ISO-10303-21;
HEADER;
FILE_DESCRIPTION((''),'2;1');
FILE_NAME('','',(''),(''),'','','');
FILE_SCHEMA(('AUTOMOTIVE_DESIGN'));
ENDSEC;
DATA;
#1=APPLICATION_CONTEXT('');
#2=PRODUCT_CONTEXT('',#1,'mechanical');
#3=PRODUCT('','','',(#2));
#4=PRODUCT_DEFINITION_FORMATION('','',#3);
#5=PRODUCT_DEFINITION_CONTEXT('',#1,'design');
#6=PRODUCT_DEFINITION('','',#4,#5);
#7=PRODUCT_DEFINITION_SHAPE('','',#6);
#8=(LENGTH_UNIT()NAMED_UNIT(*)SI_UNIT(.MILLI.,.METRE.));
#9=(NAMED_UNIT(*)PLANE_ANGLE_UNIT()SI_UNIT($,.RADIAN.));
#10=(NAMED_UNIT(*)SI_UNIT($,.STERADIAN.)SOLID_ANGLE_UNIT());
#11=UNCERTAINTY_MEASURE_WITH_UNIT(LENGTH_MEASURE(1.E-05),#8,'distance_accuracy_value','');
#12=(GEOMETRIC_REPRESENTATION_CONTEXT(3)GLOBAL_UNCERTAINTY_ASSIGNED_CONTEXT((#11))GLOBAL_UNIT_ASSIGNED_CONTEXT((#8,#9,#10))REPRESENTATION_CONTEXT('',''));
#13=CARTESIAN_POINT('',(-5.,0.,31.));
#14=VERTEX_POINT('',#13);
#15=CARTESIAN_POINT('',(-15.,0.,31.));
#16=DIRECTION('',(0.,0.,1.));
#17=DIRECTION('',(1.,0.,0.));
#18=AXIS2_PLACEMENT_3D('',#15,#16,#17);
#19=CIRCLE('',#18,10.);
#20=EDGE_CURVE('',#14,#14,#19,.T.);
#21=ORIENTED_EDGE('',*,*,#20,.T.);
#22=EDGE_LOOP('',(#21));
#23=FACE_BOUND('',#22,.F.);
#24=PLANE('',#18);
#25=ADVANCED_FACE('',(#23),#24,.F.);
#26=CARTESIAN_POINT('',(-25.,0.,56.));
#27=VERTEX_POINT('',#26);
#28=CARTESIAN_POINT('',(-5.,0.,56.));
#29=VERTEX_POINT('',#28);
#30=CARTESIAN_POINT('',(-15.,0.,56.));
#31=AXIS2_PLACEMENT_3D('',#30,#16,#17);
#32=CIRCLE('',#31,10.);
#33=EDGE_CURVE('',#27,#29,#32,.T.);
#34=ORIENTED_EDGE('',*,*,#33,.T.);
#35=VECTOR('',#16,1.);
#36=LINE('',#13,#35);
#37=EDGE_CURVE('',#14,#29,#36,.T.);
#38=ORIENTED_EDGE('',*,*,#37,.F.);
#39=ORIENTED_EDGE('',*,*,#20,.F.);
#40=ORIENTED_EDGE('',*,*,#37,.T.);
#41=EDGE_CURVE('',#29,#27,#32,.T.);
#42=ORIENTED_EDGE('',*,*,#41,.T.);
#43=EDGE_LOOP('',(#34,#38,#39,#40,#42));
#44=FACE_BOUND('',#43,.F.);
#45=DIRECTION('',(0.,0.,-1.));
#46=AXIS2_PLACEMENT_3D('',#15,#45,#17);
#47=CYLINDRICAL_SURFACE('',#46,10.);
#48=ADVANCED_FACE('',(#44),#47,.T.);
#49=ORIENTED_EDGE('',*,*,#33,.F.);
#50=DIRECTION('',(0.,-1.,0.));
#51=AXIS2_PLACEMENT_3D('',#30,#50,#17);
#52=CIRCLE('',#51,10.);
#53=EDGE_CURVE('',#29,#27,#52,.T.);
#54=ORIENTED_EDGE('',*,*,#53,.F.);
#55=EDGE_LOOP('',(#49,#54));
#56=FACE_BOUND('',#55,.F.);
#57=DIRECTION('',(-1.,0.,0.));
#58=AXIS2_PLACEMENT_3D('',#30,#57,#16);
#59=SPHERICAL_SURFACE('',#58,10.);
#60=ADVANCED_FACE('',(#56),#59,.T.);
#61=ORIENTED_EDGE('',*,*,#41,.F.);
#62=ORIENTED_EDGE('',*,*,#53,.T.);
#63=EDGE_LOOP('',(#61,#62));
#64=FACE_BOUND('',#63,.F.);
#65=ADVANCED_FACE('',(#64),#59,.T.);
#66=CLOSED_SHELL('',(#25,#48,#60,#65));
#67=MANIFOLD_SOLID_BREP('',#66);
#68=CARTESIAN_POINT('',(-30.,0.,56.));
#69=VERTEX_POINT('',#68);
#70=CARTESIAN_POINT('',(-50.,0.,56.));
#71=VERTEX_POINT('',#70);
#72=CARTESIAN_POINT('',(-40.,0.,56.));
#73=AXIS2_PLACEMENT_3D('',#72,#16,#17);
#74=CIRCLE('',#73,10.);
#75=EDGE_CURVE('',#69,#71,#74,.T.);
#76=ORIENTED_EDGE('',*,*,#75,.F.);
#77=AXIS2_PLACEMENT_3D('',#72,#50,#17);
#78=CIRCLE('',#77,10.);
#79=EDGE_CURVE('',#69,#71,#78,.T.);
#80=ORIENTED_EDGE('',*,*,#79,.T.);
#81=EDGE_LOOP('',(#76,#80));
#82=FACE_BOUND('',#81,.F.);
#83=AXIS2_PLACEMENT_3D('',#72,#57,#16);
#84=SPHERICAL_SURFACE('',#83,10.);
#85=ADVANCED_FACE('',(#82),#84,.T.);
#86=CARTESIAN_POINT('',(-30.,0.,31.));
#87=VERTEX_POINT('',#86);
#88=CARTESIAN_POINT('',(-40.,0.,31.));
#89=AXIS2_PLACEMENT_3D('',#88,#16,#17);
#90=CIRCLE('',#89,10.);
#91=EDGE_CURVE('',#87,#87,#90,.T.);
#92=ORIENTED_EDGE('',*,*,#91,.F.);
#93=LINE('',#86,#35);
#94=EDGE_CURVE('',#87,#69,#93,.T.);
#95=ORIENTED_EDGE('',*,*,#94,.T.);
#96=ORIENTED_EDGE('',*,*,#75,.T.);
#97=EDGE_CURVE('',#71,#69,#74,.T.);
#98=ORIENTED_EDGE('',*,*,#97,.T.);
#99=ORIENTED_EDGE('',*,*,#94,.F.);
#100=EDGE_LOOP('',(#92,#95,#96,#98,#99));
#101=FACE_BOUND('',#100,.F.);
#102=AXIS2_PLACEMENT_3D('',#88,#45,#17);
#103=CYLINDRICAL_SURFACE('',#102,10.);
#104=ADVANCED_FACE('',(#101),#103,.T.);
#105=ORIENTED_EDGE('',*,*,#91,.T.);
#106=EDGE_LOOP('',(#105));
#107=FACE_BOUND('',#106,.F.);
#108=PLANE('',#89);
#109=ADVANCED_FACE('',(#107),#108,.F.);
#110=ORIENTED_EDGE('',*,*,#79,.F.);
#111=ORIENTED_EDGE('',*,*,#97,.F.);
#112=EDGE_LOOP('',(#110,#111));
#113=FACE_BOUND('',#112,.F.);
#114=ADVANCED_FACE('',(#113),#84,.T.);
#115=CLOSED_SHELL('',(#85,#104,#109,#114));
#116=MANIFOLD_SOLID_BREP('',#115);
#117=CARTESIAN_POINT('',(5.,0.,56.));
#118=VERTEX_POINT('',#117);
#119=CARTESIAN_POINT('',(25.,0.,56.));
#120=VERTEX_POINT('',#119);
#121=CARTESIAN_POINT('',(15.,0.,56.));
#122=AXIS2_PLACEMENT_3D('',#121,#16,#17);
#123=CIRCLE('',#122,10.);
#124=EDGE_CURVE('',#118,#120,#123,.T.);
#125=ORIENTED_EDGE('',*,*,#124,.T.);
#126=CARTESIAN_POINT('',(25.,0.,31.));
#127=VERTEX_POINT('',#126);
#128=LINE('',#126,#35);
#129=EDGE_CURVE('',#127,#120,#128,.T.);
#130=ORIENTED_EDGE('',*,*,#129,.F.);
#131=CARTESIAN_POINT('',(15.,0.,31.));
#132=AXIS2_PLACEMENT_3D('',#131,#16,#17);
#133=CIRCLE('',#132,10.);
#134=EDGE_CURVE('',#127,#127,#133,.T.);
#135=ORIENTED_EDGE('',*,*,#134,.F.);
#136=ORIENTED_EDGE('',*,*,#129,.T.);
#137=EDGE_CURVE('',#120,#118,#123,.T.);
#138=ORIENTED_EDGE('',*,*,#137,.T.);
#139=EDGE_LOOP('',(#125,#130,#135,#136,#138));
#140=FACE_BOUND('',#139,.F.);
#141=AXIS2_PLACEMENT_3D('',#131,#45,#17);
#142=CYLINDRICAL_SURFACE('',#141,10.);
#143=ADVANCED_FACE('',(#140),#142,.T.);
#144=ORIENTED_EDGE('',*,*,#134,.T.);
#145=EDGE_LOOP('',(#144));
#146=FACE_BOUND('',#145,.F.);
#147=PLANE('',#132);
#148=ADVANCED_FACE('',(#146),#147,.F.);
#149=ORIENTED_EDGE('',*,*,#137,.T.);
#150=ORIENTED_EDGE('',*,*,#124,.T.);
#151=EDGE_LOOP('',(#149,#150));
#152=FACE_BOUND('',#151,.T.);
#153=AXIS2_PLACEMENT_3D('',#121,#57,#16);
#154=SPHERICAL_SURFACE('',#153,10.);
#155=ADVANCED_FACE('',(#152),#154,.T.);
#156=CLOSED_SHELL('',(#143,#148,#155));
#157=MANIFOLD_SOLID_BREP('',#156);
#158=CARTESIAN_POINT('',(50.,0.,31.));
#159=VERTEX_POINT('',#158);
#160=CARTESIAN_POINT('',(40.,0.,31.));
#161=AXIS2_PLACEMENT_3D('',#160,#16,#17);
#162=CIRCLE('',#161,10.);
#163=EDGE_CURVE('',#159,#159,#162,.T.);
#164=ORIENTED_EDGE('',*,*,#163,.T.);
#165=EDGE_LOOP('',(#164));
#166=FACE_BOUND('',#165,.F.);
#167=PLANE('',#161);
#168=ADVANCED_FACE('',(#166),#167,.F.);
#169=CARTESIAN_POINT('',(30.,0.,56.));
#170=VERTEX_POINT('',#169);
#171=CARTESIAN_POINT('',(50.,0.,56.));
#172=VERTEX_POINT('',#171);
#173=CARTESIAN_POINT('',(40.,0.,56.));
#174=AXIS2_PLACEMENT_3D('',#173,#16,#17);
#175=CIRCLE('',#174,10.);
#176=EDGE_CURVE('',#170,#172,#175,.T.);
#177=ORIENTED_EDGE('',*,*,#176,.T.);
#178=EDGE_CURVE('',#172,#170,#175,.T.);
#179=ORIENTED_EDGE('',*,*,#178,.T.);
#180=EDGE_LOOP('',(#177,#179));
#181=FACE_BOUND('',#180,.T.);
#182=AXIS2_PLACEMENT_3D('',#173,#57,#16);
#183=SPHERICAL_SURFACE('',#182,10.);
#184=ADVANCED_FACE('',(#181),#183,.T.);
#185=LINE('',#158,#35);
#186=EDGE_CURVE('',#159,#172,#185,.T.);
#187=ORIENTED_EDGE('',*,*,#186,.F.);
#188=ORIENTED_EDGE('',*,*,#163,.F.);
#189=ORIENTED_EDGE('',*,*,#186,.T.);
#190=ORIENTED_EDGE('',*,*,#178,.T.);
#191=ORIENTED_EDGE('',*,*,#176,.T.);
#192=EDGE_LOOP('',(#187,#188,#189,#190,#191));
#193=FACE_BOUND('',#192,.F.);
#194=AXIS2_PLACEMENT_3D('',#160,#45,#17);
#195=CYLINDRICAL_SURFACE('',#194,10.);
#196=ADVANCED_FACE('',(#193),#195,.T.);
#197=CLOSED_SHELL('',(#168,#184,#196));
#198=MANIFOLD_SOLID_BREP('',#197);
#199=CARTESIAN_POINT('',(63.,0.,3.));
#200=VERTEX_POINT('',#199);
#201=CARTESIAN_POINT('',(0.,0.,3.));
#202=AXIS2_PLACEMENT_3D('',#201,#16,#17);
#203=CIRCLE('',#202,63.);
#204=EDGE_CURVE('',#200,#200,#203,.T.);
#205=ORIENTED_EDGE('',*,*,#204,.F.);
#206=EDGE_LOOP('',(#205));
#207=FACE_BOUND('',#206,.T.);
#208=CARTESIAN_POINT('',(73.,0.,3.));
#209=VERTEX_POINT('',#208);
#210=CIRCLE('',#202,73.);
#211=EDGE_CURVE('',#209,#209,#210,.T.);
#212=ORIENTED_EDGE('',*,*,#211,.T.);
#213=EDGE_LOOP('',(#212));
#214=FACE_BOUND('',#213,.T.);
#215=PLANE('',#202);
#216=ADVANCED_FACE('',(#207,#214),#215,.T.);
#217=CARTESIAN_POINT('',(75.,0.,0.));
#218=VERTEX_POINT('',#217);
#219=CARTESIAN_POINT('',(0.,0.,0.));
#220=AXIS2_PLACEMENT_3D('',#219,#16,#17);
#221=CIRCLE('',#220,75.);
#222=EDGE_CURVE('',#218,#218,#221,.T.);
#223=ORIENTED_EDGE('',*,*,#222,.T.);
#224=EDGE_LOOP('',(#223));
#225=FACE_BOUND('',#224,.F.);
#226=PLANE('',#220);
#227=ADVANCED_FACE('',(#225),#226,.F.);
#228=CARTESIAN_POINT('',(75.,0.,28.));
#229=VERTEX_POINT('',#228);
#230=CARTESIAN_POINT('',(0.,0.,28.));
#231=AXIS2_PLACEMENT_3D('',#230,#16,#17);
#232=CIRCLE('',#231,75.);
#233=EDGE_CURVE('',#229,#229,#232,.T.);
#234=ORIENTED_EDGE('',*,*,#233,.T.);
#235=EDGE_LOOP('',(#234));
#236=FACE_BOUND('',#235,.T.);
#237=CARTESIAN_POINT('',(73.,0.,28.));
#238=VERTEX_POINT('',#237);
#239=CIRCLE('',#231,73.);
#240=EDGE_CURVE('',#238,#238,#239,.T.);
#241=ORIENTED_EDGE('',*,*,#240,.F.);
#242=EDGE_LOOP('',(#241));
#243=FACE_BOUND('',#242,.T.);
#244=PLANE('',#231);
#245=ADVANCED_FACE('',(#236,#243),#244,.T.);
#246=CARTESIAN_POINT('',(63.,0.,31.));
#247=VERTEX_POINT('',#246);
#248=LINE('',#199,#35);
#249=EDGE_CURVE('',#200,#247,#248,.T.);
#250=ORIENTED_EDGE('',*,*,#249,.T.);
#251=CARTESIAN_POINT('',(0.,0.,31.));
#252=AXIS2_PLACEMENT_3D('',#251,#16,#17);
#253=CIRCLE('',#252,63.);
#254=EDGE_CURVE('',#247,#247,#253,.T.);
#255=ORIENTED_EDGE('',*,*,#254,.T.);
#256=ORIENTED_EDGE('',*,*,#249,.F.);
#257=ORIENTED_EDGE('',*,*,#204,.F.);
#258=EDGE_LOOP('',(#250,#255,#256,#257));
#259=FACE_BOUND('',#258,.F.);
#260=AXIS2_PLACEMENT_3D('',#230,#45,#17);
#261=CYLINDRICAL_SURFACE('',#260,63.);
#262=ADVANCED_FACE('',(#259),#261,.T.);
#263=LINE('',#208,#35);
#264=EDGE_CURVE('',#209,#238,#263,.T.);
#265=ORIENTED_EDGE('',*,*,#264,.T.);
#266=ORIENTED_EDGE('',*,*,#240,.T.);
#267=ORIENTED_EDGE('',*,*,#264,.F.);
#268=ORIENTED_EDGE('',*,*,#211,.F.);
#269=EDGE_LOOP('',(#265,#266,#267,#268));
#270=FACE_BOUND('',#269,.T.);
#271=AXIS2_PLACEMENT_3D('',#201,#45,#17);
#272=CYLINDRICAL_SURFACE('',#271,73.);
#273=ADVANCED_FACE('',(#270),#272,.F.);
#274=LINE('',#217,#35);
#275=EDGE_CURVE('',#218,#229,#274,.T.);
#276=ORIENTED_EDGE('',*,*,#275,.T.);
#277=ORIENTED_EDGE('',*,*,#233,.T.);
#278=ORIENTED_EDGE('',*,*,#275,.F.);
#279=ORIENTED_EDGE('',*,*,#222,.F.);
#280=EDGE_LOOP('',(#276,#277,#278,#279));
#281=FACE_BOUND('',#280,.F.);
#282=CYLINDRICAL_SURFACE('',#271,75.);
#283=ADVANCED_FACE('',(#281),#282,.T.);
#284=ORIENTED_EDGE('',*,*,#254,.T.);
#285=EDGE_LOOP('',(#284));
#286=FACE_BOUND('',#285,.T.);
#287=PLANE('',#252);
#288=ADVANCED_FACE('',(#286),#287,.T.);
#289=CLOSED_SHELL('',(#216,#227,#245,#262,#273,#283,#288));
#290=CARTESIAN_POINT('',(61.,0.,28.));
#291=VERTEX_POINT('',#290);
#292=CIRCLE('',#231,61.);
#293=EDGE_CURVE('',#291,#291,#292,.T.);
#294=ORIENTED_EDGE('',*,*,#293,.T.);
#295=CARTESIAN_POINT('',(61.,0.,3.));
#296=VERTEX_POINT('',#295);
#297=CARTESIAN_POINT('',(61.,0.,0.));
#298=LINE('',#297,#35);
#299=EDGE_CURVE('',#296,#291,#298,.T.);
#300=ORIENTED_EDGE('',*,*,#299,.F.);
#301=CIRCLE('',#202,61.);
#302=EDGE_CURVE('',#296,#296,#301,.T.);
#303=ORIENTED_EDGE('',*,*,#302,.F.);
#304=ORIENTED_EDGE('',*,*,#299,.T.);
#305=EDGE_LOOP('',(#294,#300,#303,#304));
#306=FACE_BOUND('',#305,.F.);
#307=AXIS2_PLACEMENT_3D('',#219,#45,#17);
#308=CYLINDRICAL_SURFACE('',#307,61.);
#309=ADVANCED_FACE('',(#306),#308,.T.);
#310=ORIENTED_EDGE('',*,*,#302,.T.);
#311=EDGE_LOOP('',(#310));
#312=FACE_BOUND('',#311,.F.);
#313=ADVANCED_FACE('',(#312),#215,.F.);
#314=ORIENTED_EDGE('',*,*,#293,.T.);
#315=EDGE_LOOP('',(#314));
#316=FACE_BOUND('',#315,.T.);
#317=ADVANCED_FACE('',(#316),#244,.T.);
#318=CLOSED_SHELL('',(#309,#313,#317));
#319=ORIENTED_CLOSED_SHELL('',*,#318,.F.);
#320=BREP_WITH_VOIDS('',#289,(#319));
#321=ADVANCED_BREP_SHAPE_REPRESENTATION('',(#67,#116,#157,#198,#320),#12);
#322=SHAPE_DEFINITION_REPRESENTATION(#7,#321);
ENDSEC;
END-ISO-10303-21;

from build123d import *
from build123d import SkipClean  # not in build123d's __all__

# Parameters (mm, degrees)
F0_R     = 75
F0_R_2   = 73
F0_R_3   = 63
F0_R_4   = 61
F1_DEPTH = 3
F2_R     = 75
F2_R_2   = 73
F2_R_3   = 63
F2_R_4   = 61
F3_DEPTH = 25
F4_DEPTH = 3
F5_R     = 63
F5_R_2   = 61
F6_DEPTH = 3
F7_R     = 10
F8_DEPTH = 25


with BuildPart() as f1:
    # F0 (on Top) → F1 (new body)
    with BuildSketch(Plane.XY):
        Circle(F0_R)
        Circle(F0_R_2, mode=Mode.SUBTRACT)
        Circle(F0_R_2)
        Circle(F0_R_3, mode=Mode.SUBTRACT)
        Circle(F0_R_3)
        Circle(F0_R_4, mode=Mode.SUBTRACT)
    extrude(amount=F1_DEPTH)

    # F2 (on face) → F3 (join)
    with BuildSketch(Plane.XY.offset(3)):
        Circle(F2_R)
        Circle(F2_R_2, mode=Mode.SUBTRACT)
        Circle(F2_R_3)
        Circle(F2_R_4, mode=Mode.SUBTRACT)
    extrude(amount=F3_DEPTH)

    # F0 (on Top) → F4 (join)
    with BuildSketch(Plane.XY):
        Circle(F0_R_4)
    extrude(amount=F4_DEPTH)

    # F5 (on face) → F6 (join)
    with BuildSketch(Plane.XY.offset(28)):
        Circle(F5_R)
        Circle(F5_R_2, mode=Mode.SUBTRACT)
        Circle(F5_R_2)
    extrude(amount=F6_DEPTH)


with BuildPart() as f8:
    # F7 (on face) → F8 (new body)
    with BuildSketch(Plane.XY.offset(31)):
        with Locations((-40, 0)):
            Circle(F7_R)
    extrude(amount=F8_DEPTH)

    # F9 (on Front) → F10 (revolve)
    with BuildSketch(Plane.XZ):
        with BuildLine():
            ThreePointArc((-30, 56), (-40, 66), (-50, 56))
            Line((-50, 56), (-30, 56))
        make_face()
    with SkipClean():  # cleaning this boolean's faces spoils the solid; the shape is the same uncleaned
        revolve(axis=Axis((-40, 0, 56), (1, 0, 0)))


with BuildPart() as f8b:
    # F7 (on face) → F8, piece 2 (new body)
    with BuildSketch(Plane.XY.offset(31)):
        with Locations((-15, 0)):
            Circle(F7_R)
    extrude(amount=F8_DEPTH)

    # F9 (on Front) → F11 (revolve)
    with BuildSketch(Plane.XZ):
        with BuildLine():
            ThreePointArc((-5, 56), (-15, 66), (-25, 56))
            Line((-25, 56), (-5, 56))
        make_face()
    with SkipClean():  # cleaning this boolean's faces spoils the solid; the shape is the same uncleaned
        revolve(axis=Axis((-15, 0, 56), (1, 0, 0)))


with BuildPart() as f8c:
    # F7 (on face) → F8, piece 3 (new body)
    with BuildSketch(Plane.XY.offset(31)):
        with Locations((15, 0)):
            Circle(F7_R)
    extrude(amount=F8_DEPTH)

    # F9 (on Front) → F12 (revolve)
    with BuildSketch(Plane.XZ):
        with BuildLine():
            Line((5, 56), (25, 56))
            ThreePointArc((25, 56), (15, 66), (5, 56))
        make_face()
    revolve(axis=Axis((15, 0, 56), (-1, 0, 0)))


with BuildPart() as f8d:
    # F7 (on face) → F8, piece 4 (new body)
    with BuildSketch(Plane.XY.offset(31)):
        with Locations((40, 0)):
            Circle(F7_R)
    extrude(amount=F8_DEPTH)

    # F9 (on Front) → F13 (revolve)
    with BuildSketch(Plane.XZ):
        with BuildLine():
            Line((30, 56), (50, 56))
            ThreePointArc((50, 56), (40, 66), (30, 56))
        make_face()
    revolve(axis=Axis((40, 0, 56), (-1, 0, 0)))


solid = Compound([f1.part, f8.part, f8b.part, f8c.part, f8d.part])
